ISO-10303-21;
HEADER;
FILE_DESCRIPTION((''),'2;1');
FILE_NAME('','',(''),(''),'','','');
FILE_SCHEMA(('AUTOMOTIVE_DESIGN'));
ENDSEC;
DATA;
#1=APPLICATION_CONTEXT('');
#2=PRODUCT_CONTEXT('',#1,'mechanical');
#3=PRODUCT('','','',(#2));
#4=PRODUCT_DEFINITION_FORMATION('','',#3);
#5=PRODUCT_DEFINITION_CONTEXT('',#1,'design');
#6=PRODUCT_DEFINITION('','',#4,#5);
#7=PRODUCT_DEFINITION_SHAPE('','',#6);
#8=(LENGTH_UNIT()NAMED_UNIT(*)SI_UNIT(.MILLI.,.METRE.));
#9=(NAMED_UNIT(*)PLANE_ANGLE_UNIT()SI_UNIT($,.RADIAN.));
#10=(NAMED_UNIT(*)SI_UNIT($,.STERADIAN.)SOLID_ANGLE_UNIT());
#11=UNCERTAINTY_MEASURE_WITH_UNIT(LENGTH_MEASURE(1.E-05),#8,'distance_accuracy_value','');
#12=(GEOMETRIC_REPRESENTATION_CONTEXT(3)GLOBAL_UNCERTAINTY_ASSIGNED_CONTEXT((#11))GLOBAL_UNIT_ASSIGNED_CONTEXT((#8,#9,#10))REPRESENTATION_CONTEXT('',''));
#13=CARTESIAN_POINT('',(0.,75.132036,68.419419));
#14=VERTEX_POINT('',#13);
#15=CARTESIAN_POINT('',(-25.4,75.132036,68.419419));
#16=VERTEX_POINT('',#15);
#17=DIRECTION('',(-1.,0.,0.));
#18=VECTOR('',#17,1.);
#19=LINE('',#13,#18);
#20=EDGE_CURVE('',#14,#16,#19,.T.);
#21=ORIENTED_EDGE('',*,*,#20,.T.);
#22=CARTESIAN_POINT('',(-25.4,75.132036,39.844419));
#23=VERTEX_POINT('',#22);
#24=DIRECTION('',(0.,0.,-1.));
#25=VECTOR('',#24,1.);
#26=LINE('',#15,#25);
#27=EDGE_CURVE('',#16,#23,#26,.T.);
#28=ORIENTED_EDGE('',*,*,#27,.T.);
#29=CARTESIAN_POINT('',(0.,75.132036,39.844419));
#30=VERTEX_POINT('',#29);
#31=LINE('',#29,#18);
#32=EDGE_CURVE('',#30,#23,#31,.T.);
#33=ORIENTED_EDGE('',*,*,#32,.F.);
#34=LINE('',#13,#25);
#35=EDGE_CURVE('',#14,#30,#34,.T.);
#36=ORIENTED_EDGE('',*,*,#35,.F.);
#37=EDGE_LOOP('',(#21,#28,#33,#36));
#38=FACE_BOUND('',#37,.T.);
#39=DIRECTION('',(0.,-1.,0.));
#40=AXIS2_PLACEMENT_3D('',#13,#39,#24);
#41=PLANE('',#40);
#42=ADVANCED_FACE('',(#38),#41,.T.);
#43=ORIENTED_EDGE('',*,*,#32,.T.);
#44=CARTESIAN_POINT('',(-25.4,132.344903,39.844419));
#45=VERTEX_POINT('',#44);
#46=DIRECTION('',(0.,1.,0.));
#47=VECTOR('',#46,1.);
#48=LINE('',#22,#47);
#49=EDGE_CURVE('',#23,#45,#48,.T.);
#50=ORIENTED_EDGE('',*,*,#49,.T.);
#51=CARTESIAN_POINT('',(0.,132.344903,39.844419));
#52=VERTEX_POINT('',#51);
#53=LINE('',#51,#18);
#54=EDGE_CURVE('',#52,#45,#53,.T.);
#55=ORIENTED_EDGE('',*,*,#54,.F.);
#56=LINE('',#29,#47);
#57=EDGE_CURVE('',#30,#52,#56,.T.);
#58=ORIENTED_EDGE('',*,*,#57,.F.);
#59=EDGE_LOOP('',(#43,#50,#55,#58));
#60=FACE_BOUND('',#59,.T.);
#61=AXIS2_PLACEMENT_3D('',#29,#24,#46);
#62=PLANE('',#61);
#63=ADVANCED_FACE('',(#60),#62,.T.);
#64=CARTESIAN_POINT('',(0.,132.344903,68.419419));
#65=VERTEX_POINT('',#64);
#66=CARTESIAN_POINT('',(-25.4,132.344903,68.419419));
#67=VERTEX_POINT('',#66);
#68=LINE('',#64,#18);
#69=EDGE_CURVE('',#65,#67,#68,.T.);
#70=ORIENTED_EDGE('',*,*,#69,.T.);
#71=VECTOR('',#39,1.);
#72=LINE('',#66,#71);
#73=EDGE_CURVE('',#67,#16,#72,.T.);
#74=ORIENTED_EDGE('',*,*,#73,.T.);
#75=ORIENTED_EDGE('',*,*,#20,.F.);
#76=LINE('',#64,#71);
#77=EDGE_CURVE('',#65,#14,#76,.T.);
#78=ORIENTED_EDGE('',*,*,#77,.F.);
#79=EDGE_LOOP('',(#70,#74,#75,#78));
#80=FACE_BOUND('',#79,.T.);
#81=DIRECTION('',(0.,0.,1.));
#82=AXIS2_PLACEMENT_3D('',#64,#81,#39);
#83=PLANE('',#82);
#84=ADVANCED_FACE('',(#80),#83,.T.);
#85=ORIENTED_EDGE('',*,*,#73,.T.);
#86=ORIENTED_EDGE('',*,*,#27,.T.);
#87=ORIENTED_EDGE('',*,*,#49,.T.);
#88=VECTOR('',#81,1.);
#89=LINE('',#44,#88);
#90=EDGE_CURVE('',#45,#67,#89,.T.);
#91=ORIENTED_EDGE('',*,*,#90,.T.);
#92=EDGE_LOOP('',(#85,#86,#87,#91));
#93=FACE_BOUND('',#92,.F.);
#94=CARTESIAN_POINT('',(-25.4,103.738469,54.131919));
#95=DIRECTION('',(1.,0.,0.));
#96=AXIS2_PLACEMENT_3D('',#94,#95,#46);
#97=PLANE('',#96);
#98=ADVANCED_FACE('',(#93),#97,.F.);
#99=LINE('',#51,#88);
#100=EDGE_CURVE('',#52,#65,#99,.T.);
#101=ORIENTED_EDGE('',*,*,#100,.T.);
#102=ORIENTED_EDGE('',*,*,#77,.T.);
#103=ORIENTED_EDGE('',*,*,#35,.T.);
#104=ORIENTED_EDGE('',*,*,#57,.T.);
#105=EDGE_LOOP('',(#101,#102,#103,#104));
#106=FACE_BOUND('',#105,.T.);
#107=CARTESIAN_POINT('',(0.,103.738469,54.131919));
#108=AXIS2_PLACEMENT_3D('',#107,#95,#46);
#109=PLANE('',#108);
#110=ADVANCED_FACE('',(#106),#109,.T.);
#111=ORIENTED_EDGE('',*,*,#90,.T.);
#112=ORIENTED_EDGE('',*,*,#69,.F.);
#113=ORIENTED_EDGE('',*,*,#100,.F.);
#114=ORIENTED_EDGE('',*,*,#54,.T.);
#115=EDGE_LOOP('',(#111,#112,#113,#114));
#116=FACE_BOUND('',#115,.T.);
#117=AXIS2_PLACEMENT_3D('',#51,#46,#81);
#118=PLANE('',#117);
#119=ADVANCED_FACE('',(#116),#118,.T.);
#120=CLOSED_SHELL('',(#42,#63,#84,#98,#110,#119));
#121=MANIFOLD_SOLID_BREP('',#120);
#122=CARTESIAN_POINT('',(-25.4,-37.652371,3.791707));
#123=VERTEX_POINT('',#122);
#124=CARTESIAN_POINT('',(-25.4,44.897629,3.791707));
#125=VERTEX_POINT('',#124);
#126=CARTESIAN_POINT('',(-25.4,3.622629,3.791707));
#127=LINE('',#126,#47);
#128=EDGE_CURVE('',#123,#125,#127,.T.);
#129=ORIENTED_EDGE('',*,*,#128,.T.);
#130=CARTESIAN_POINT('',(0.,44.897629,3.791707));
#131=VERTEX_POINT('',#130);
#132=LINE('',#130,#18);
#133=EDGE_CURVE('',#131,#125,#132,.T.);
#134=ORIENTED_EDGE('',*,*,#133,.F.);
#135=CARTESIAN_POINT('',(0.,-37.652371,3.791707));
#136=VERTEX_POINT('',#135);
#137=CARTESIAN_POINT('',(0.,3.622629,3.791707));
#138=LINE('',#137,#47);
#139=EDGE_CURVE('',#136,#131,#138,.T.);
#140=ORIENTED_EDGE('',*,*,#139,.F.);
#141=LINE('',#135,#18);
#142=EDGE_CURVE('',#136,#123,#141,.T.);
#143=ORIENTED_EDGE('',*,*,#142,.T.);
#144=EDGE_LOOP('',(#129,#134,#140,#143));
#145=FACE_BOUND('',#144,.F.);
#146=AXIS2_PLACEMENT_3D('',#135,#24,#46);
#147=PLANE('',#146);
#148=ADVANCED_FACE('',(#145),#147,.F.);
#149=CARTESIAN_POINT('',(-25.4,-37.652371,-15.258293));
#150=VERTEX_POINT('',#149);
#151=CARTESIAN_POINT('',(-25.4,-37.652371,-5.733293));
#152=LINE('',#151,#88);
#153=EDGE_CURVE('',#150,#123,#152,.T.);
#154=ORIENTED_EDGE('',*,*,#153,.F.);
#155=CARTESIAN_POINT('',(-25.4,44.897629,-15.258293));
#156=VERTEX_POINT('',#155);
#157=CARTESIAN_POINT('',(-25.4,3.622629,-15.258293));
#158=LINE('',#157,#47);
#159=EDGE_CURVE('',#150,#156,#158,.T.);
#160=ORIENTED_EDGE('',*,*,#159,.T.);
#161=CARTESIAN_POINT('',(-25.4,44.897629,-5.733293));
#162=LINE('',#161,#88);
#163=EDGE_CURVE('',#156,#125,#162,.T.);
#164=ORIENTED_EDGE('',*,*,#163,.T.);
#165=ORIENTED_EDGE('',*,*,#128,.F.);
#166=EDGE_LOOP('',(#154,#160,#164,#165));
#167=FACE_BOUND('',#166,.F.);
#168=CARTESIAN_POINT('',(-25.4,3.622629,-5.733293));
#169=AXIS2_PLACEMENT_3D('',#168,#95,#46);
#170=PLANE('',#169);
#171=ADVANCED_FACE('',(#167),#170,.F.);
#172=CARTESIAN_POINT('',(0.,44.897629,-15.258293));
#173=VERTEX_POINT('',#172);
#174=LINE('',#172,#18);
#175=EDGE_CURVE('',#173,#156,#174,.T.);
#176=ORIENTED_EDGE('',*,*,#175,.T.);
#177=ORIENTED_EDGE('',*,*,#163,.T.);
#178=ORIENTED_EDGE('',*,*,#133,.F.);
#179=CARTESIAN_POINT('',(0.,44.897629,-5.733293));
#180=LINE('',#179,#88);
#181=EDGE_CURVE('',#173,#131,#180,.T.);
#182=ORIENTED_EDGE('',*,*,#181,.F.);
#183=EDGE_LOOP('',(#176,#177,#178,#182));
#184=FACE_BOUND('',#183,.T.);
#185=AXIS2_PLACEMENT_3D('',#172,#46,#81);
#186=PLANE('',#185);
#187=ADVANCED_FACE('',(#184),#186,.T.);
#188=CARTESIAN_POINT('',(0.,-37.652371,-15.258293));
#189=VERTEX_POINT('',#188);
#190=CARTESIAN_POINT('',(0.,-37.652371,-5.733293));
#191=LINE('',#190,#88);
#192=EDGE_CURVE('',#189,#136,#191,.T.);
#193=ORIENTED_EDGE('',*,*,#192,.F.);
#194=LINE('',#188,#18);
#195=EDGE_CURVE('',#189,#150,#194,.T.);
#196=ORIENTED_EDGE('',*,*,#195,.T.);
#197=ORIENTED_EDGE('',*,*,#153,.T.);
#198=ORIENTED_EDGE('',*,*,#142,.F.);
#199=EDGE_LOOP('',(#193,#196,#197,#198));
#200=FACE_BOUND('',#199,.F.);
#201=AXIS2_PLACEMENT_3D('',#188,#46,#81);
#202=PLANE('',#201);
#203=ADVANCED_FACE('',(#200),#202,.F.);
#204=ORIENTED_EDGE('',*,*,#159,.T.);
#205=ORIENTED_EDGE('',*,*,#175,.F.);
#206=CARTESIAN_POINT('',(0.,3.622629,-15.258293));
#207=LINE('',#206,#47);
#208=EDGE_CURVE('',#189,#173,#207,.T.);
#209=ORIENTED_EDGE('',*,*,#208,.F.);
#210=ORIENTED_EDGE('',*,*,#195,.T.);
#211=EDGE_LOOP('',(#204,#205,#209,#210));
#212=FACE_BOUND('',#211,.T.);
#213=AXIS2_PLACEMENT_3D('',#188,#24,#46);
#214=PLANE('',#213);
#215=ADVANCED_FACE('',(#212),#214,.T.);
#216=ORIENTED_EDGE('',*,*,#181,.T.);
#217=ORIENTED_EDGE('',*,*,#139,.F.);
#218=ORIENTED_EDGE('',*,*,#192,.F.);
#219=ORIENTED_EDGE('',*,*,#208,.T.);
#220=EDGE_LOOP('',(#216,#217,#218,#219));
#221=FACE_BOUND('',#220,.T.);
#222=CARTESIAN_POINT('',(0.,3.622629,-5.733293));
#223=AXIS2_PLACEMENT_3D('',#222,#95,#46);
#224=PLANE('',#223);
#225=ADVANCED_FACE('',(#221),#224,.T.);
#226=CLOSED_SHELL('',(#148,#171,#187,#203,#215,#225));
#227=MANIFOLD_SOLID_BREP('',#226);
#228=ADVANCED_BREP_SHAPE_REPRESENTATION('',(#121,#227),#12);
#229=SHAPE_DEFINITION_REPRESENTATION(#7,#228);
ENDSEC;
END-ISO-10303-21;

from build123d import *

# Parameters (mm, degrees)
F0_W     = 82.55
F0_H     = 19.05
F1_DEPTH = 25.4


# Not quite as in the source:
# - the program builds the solid bodies; features that only make, move or delete a surface that nothing else refers to are left out


with BuildPart() as f1:
    # F0 (on Right) → F1 (new body)
    with BuildSketch(Plane.YZ):
        with Locations((3.6226294778, -5.7332926338)):
            Rectangle(F0_W, F0_H)
    extrude(amount=-F1_DEPTH)


with BuildPart() as f1b:
    # F0 (on Right) → F1, piece 2 (new body)
    with BuildSketch(Plane.YZ):
        Polygon((75.1320355881, 68.4194193109), (75.1320355881, 49.7785689481), (75.1320355881, 39.8444193109), (132.3449026117, 39.8444193109), (132.3449026117, 68.4194193109), align=None)
    extrude(amount=-F1_DEPTH)


solid = Compound([f1.part, f1b.part])
